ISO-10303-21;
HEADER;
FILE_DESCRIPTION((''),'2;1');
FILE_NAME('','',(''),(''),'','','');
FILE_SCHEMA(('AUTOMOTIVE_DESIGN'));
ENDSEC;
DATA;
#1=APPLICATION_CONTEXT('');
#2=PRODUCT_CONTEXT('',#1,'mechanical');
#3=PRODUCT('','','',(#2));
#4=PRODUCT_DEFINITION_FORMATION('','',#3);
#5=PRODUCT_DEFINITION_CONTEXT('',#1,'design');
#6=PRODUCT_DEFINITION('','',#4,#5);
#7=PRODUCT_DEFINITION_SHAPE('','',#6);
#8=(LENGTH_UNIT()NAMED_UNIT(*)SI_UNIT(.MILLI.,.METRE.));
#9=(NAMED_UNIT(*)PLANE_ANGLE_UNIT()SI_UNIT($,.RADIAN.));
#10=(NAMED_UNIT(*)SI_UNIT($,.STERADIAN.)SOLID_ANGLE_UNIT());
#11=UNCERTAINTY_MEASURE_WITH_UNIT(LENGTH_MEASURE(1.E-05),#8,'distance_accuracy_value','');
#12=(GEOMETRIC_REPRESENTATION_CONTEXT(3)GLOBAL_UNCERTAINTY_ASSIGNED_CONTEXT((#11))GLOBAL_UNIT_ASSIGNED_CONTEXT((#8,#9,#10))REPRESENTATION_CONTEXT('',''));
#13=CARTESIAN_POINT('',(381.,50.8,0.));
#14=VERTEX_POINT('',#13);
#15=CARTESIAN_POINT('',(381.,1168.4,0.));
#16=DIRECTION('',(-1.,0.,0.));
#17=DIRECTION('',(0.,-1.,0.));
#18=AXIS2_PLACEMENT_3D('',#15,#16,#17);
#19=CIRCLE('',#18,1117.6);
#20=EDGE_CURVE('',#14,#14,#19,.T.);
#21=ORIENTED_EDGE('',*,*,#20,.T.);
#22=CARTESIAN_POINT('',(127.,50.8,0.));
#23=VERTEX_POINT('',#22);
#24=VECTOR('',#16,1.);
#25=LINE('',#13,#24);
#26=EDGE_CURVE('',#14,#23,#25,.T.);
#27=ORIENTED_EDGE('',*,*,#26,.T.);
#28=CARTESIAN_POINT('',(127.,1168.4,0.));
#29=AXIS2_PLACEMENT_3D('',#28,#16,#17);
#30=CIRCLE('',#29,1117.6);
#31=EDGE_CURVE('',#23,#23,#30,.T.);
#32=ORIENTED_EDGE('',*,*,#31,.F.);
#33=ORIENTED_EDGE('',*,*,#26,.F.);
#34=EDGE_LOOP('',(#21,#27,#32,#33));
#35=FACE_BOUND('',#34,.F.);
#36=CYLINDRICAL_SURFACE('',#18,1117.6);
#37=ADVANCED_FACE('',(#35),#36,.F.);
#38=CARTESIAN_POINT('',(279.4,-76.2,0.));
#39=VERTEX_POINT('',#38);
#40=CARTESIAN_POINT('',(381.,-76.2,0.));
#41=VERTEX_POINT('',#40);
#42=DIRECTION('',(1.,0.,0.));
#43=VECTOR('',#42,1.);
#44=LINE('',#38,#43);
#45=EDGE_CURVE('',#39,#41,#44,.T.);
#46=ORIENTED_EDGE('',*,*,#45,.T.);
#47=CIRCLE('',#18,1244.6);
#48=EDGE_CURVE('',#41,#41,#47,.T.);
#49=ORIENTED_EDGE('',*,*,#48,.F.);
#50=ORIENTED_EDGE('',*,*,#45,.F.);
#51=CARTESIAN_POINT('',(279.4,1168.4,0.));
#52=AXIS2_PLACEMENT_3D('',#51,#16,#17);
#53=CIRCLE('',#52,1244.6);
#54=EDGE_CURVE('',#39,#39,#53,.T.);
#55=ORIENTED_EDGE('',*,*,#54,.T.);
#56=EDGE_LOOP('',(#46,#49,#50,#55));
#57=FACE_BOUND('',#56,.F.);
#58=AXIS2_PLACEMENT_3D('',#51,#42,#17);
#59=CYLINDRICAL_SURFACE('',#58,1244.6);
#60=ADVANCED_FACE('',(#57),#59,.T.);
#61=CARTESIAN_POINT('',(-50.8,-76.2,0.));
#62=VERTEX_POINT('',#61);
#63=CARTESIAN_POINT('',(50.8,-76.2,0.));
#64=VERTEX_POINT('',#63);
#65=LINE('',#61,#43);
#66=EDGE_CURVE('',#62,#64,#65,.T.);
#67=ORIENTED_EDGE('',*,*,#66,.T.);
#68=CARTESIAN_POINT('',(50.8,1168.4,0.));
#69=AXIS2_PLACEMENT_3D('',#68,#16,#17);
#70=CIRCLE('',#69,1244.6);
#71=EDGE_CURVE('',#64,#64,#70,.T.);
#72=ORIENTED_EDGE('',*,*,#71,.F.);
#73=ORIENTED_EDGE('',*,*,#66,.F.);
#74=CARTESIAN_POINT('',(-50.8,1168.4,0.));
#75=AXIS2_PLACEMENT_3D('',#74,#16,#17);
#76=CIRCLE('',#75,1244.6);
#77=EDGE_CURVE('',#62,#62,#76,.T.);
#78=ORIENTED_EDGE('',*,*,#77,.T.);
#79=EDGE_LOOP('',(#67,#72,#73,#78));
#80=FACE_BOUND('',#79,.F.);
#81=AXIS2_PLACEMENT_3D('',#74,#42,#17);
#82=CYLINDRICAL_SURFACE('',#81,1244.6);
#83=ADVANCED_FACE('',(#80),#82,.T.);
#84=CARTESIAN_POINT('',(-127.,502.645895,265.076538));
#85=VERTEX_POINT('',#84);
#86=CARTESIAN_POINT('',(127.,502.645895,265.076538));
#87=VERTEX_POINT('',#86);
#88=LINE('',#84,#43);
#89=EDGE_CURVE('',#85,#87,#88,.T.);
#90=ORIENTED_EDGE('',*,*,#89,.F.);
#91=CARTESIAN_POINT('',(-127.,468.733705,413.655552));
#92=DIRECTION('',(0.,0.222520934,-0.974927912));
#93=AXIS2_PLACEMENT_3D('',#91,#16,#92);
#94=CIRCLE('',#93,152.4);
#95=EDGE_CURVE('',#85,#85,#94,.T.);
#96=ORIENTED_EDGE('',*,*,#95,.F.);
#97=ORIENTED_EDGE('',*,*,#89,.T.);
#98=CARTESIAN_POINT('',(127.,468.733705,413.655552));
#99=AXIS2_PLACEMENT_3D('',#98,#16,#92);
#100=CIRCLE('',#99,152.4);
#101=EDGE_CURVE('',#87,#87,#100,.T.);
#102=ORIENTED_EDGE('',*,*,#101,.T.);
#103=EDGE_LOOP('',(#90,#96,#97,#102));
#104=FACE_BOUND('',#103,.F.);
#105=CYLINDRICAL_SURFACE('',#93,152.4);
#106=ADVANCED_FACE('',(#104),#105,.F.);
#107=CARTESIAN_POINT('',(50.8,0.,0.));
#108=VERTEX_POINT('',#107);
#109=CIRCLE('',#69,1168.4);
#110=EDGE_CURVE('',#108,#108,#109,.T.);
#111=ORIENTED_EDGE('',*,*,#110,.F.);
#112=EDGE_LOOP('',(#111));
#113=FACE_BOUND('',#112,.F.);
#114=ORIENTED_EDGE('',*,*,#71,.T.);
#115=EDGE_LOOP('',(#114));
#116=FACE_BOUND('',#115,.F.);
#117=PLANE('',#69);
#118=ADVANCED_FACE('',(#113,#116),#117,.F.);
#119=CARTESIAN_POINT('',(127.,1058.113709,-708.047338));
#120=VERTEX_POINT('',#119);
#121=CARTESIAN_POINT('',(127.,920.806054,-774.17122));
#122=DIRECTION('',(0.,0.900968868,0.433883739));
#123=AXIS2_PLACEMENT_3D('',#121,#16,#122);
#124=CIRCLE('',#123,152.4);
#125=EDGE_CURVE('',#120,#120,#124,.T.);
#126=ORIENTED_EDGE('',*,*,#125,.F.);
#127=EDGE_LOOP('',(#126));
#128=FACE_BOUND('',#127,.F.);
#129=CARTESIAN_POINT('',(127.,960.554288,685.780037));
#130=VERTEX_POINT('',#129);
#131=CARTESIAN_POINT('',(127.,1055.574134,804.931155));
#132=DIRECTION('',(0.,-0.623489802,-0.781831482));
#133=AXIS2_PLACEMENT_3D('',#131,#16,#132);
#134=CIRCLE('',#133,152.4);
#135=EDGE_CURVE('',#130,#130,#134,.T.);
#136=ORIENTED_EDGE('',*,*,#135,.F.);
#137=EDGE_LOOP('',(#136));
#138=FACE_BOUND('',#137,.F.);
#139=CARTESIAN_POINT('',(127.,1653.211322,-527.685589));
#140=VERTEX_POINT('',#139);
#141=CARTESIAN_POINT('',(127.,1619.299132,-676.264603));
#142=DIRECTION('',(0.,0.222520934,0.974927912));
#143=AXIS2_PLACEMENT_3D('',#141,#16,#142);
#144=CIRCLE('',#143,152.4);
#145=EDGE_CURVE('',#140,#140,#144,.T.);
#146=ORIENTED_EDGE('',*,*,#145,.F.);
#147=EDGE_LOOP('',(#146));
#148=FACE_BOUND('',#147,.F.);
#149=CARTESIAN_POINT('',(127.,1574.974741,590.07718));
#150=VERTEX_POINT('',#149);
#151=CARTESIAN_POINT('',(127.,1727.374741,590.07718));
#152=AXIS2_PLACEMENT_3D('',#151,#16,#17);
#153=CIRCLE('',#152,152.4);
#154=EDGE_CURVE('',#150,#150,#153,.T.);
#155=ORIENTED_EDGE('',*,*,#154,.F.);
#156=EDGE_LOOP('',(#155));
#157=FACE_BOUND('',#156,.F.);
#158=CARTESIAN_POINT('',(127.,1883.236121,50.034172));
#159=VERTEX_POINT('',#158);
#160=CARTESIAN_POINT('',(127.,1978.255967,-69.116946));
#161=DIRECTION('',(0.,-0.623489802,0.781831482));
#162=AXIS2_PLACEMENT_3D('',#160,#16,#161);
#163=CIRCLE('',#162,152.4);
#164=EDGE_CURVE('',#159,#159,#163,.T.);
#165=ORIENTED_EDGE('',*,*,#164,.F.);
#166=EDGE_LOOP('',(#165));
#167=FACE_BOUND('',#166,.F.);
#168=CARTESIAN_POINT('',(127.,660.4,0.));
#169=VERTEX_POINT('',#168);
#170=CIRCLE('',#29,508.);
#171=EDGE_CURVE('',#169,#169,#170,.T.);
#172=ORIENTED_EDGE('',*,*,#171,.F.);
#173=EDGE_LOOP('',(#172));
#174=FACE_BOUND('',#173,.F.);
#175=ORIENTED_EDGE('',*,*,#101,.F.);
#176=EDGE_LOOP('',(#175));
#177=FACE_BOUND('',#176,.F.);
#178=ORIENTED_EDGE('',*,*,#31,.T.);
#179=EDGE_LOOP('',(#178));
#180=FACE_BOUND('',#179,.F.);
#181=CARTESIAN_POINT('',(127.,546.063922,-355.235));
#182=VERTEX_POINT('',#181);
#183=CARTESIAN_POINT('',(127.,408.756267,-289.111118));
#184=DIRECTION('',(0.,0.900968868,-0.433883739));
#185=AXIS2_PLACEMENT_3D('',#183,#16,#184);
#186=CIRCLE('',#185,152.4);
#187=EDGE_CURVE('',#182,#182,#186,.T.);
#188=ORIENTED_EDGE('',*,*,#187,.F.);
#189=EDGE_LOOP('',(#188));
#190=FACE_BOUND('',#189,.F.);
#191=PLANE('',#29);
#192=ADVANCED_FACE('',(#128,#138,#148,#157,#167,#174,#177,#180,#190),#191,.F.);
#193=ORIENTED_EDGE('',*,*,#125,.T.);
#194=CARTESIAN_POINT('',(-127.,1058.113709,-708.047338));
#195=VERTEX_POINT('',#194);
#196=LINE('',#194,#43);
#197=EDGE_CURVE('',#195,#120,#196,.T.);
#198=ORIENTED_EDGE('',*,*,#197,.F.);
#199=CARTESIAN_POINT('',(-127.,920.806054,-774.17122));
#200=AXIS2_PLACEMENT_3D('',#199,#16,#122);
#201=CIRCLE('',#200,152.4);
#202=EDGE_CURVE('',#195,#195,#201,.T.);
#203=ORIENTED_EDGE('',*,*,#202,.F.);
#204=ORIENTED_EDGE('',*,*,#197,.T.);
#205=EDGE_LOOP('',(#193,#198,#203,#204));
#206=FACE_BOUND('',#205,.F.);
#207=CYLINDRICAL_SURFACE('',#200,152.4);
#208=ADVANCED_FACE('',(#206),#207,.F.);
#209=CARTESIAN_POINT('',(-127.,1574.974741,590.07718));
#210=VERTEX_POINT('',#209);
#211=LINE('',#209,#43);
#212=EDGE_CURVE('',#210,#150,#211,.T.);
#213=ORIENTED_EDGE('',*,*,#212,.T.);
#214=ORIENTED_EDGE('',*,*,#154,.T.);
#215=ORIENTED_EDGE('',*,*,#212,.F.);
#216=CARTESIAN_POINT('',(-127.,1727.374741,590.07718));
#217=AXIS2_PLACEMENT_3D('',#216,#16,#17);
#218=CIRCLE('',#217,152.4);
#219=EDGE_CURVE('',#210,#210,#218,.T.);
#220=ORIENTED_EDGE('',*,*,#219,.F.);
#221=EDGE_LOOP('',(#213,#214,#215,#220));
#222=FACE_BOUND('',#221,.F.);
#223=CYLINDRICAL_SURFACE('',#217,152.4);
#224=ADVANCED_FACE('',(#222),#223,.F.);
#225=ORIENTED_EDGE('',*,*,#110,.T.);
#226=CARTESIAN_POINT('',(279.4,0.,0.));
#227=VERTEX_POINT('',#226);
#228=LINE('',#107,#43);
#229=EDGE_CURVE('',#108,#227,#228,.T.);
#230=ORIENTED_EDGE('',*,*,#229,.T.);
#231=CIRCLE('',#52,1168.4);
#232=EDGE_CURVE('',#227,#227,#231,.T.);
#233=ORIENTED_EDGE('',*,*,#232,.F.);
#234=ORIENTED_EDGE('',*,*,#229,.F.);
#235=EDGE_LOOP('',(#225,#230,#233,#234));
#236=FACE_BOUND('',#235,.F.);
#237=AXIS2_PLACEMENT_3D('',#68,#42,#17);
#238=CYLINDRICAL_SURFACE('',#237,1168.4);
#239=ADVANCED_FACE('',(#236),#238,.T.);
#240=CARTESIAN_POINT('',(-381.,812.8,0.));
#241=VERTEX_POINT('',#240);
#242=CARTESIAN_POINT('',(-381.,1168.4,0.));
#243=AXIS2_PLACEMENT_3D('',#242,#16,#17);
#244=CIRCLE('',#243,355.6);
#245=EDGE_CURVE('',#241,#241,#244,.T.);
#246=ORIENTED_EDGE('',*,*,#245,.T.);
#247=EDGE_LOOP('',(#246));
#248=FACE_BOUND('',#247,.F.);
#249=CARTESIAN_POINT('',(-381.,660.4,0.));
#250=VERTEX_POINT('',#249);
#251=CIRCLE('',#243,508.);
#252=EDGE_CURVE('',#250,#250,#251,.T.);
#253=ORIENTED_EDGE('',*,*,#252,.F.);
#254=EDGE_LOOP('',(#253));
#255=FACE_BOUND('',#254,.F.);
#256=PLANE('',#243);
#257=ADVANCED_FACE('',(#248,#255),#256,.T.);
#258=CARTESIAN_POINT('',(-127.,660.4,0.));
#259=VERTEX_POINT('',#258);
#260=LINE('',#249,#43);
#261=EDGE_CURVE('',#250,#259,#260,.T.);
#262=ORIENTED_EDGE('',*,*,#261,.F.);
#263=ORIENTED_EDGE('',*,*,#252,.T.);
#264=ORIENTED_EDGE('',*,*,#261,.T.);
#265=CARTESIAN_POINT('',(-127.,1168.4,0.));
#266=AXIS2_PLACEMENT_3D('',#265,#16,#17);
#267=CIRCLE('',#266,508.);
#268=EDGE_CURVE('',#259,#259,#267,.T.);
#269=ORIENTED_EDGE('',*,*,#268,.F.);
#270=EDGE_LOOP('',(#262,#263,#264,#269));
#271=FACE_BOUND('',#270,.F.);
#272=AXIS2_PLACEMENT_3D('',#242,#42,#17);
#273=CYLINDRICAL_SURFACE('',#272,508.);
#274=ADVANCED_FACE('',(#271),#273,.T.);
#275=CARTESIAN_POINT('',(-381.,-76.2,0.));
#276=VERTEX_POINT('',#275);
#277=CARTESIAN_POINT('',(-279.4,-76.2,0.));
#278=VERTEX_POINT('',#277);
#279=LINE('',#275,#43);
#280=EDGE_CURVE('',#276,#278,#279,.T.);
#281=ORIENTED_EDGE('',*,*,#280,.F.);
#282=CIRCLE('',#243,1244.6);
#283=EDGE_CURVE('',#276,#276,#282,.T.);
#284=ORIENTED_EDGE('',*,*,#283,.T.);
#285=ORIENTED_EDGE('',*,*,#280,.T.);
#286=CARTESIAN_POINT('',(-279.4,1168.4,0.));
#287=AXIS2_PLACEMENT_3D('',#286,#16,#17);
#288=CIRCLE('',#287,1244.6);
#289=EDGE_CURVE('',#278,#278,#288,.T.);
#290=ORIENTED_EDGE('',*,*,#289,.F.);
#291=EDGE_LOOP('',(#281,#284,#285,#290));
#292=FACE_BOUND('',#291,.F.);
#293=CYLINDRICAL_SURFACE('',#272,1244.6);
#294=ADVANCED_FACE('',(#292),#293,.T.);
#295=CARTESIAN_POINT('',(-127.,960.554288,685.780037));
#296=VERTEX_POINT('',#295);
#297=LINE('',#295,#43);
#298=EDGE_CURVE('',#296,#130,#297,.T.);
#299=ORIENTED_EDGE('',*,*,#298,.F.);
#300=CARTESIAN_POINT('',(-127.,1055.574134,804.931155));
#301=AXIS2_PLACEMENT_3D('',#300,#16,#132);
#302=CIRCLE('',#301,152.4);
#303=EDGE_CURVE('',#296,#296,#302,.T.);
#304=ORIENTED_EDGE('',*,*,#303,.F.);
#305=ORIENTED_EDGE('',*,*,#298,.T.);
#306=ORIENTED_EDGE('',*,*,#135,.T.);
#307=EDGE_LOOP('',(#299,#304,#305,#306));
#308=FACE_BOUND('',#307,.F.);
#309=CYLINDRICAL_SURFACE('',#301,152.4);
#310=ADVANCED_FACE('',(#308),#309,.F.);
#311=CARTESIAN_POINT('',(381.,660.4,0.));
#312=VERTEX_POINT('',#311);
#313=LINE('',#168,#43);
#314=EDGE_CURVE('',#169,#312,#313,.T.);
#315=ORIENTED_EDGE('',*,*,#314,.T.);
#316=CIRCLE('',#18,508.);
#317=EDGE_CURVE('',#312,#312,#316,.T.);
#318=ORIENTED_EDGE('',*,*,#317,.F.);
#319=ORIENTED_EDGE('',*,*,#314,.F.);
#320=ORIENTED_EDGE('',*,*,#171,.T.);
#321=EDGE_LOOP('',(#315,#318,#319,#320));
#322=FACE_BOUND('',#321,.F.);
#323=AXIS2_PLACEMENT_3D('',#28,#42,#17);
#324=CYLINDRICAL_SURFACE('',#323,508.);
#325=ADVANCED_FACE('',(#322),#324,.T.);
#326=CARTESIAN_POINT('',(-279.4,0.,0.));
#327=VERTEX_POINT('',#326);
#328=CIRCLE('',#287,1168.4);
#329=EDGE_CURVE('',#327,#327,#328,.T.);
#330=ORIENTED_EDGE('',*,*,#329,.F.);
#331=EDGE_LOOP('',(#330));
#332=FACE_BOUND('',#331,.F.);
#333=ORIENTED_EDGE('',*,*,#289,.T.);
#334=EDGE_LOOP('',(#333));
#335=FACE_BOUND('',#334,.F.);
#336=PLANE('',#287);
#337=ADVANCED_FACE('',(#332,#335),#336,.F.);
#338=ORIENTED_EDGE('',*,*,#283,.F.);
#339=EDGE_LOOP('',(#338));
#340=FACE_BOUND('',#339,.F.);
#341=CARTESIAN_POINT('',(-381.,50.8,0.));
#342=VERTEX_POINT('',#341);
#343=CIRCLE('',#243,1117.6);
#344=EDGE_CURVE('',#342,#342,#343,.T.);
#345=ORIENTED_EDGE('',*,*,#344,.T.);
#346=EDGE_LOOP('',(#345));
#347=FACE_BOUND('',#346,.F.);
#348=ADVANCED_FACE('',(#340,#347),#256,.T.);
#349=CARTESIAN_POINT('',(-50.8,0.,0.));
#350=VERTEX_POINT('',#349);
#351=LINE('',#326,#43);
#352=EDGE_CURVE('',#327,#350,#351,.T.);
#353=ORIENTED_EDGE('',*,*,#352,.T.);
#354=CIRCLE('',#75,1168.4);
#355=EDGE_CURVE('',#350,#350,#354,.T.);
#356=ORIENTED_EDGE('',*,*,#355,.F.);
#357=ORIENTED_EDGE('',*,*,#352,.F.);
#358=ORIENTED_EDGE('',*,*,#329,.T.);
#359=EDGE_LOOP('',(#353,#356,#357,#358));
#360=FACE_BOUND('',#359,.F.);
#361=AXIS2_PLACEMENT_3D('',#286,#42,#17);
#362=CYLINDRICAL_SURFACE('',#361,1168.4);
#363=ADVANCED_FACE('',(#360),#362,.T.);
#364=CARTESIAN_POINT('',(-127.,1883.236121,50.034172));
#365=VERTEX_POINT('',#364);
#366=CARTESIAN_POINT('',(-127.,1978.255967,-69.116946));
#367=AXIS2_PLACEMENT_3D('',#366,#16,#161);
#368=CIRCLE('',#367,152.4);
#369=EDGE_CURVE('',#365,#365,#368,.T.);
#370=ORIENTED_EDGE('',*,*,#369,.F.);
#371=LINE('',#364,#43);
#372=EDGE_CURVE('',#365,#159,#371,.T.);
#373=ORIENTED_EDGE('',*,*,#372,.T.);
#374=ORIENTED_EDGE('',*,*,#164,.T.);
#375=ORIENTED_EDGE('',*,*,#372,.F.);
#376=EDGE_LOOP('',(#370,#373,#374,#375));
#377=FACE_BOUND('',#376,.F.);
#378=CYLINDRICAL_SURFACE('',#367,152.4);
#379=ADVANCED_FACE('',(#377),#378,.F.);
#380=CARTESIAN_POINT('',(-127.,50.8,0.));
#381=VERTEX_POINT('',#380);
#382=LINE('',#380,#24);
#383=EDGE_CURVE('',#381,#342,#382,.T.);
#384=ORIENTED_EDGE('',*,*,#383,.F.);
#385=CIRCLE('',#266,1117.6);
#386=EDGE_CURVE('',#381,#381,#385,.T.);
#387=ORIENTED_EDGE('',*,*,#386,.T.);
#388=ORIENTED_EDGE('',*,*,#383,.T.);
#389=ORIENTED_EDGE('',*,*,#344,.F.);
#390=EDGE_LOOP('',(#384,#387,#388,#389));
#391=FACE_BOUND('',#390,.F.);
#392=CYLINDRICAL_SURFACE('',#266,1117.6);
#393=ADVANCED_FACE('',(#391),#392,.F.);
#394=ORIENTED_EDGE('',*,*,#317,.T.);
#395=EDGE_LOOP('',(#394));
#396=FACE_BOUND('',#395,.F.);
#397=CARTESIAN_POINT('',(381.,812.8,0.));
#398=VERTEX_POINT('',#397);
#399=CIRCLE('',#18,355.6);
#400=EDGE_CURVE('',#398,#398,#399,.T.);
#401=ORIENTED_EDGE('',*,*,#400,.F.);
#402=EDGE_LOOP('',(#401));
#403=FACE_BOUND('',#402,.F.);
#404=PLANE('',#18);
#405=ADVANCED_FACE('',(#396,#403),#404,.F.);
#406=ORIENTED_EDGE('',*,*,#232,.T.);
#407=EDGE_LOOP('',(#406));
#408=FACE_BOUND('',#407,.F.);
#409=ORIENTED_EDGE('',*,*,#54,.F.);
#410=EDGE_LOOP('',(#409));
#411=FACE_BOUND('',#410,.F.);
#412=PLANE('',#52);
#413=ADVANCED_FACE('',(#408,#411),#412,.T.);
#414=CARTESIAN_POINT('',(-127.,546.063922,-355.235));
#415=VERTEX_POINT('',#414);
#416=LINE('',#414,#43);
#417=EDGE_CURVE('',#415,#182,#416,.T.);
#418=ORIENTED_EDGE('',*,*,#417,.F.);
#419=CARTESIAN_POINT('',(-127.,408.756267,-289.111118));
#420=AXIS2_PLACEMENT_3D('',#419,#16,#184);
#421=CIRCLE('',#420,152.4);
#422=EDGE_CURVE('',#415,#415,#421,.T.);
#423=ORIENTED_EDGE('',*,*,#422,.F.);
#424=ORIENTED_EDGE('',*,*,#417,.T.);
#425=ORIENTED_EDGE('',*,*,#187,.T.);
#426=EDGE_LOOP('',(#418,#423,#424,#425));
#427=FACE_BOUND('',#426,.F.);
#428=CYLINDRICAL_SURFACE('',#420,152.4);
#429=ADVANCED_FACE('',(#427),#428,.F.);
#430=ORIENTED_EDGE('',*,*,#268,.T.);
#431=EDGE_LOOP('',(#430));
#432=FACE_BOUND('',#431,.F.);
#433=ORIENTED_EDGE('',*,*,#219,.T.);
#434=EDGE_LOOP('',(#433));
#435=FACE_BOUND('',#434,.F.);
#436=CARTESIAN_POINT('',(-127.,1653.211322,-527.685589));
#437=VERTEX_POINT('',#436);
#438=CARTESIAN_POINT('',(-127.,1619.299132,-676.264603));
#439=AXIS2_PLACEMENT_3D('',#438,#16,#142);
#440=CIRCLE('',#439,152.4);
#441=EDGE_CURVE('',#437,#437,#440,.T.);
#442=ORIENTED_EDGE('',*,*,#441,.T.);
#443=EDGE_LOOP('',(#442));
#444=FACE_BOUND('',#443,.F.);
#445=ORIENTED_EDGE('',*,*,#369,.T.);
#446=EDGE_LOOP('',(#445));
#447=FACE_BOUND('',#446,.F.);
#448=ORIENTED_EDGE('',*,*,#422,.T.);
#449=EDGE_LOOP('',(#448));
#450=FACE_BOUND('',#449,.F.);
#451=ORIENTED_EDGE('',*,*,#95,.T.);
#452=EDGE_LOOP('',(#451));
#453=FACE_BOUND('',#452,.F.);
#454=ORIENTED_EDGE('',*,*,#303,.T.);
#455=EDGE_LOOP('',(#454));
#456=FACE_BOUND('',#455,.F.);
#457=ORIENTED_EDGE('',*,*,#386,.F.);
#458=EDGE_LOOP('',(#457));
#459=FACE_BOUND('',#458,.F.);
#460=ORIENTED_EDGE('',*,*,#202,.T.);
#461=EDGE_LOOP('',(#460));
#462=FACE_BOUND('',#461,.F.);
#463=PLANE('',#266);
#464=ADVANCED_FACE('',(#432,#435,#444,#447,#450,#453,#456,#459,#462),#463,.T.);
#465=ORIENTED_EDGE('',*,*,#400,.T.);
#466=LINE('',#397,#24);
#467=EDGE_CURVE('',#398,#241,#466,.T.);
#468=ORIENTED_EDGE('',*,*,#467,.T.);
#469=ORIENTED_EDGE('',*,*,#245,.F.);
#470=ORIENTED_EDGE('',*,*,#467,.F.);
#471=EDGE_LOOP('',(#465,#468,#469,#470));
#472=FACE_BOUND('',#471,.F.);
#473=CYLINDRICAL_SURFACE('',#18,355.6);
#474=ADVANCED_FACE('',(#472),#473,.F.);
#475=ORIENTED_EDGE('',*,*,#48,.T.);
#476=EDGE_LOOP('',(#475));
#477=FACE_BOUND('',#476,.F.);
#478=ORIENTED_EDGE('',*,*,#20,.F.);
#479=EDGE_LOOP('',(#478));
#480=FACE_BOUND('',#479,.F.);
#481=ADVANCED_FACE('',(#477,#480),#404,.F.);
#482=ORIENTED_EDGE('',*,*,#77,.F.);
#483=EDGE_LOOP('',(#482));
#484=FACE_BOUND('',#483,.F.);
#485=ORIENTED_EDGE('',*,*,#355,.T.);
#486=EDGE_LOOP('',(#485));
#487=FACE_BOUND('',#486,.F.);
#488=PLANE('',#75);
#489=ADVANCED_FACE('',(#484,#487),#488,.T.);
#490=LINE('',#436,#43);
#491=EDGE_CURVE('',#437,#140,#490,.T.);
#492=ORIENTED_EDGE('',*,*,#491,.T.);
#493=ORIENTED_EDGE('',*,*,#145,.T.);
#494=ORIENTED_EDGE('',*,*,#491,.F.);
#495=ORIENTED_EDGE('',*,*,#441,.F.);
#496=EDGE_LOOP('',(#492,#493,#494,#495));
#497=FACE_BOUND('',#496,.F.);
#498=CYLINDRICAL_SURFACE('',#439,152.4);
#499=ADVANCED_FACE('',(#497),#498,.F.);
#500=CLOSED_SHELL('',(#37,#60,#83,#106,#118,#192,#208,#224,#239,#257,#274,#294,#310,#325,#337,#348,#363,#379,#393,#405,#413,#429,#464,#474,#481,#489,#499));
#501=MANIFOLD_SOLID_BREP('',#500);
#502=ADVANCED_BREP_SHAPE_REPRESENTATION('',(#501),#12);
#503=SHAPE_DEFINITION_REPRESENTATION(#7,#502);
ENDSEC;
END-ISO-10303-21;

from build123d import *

# Parameters (mm, degrees)
F2_R            = 152.4
F3_DEPTH        = 2230.12
F4_DEPTH        = 508.001
F4_COPIES_COUNT = 7


# Not quite as in the source:
# - a pattern or mirror of a feature is missing from the dataset's text; its kind, count and spacing are read off the source's solid
# - a feature names something its author has since deleted; it is built from what else it names


with BuildPart() as f1:
    # F0 (on Top) → F1 (revolve)
    with BuildSketch(Plane.XY):
        Polygon((381, 812.8), (-381, 812.8), (-381, 660.4), (-127, 660.4), (-127, 50.8), (-381, 50.8), (-381, -76.2), (-279.4, -76.2), (-279.4, 0), (-50.8, 0), (-50.8, -76.2), (0, -76.2), (50.8, -76.2), (50.8, 0), (279.4, 0), (279.4, -76.2), (381, -76.2), (381, 50.8), (127, 50.8), (127, 660.4), (381, 660.4), align=None)
    revolve(axis=Axis((-38.2948741317, 1168.4, 0), (-1, 0, 0)))

    # F2 (on face) → F3 (cut)
    with BuildSketch(Plane(origin=(-127, 0, 0), x_dir=(0, -1, 0), z_dir=(-1, 0, 0))):
        with Locations((-1727.3747412179, 590.0771802742)):
            Circle(F2_R)
    extrude(amount=-F3_DEPTH, mode=Mode.SUBTRACT)

    # F2 (on face) → F4 (cut, through all)
    with BuildSketch(Plane(origin=(-127, 0, 0), x_dir=(0, -1, 0), z_dir=(-1, 0, 0))):
        with Locations((-1727.3747412179, 590.0771802742)):
            Circle(F2_R)
    f4 = extrude(amount=-F4_DEPTH, mode=Mode.SUBTRACT)

    # F4_copies: F4 ×7 about axis
    f4_copies_axis = Axis((0, 1168.4, 0), (1, 0, 0))
    for i in range(1, F4_COPIES_COUNT):
        add(f4.rotate(f4_copies_axis, i * 360 / F4_COPIES_COUNT), mode=Mode.SUBTRACT)


solid = f1.part
